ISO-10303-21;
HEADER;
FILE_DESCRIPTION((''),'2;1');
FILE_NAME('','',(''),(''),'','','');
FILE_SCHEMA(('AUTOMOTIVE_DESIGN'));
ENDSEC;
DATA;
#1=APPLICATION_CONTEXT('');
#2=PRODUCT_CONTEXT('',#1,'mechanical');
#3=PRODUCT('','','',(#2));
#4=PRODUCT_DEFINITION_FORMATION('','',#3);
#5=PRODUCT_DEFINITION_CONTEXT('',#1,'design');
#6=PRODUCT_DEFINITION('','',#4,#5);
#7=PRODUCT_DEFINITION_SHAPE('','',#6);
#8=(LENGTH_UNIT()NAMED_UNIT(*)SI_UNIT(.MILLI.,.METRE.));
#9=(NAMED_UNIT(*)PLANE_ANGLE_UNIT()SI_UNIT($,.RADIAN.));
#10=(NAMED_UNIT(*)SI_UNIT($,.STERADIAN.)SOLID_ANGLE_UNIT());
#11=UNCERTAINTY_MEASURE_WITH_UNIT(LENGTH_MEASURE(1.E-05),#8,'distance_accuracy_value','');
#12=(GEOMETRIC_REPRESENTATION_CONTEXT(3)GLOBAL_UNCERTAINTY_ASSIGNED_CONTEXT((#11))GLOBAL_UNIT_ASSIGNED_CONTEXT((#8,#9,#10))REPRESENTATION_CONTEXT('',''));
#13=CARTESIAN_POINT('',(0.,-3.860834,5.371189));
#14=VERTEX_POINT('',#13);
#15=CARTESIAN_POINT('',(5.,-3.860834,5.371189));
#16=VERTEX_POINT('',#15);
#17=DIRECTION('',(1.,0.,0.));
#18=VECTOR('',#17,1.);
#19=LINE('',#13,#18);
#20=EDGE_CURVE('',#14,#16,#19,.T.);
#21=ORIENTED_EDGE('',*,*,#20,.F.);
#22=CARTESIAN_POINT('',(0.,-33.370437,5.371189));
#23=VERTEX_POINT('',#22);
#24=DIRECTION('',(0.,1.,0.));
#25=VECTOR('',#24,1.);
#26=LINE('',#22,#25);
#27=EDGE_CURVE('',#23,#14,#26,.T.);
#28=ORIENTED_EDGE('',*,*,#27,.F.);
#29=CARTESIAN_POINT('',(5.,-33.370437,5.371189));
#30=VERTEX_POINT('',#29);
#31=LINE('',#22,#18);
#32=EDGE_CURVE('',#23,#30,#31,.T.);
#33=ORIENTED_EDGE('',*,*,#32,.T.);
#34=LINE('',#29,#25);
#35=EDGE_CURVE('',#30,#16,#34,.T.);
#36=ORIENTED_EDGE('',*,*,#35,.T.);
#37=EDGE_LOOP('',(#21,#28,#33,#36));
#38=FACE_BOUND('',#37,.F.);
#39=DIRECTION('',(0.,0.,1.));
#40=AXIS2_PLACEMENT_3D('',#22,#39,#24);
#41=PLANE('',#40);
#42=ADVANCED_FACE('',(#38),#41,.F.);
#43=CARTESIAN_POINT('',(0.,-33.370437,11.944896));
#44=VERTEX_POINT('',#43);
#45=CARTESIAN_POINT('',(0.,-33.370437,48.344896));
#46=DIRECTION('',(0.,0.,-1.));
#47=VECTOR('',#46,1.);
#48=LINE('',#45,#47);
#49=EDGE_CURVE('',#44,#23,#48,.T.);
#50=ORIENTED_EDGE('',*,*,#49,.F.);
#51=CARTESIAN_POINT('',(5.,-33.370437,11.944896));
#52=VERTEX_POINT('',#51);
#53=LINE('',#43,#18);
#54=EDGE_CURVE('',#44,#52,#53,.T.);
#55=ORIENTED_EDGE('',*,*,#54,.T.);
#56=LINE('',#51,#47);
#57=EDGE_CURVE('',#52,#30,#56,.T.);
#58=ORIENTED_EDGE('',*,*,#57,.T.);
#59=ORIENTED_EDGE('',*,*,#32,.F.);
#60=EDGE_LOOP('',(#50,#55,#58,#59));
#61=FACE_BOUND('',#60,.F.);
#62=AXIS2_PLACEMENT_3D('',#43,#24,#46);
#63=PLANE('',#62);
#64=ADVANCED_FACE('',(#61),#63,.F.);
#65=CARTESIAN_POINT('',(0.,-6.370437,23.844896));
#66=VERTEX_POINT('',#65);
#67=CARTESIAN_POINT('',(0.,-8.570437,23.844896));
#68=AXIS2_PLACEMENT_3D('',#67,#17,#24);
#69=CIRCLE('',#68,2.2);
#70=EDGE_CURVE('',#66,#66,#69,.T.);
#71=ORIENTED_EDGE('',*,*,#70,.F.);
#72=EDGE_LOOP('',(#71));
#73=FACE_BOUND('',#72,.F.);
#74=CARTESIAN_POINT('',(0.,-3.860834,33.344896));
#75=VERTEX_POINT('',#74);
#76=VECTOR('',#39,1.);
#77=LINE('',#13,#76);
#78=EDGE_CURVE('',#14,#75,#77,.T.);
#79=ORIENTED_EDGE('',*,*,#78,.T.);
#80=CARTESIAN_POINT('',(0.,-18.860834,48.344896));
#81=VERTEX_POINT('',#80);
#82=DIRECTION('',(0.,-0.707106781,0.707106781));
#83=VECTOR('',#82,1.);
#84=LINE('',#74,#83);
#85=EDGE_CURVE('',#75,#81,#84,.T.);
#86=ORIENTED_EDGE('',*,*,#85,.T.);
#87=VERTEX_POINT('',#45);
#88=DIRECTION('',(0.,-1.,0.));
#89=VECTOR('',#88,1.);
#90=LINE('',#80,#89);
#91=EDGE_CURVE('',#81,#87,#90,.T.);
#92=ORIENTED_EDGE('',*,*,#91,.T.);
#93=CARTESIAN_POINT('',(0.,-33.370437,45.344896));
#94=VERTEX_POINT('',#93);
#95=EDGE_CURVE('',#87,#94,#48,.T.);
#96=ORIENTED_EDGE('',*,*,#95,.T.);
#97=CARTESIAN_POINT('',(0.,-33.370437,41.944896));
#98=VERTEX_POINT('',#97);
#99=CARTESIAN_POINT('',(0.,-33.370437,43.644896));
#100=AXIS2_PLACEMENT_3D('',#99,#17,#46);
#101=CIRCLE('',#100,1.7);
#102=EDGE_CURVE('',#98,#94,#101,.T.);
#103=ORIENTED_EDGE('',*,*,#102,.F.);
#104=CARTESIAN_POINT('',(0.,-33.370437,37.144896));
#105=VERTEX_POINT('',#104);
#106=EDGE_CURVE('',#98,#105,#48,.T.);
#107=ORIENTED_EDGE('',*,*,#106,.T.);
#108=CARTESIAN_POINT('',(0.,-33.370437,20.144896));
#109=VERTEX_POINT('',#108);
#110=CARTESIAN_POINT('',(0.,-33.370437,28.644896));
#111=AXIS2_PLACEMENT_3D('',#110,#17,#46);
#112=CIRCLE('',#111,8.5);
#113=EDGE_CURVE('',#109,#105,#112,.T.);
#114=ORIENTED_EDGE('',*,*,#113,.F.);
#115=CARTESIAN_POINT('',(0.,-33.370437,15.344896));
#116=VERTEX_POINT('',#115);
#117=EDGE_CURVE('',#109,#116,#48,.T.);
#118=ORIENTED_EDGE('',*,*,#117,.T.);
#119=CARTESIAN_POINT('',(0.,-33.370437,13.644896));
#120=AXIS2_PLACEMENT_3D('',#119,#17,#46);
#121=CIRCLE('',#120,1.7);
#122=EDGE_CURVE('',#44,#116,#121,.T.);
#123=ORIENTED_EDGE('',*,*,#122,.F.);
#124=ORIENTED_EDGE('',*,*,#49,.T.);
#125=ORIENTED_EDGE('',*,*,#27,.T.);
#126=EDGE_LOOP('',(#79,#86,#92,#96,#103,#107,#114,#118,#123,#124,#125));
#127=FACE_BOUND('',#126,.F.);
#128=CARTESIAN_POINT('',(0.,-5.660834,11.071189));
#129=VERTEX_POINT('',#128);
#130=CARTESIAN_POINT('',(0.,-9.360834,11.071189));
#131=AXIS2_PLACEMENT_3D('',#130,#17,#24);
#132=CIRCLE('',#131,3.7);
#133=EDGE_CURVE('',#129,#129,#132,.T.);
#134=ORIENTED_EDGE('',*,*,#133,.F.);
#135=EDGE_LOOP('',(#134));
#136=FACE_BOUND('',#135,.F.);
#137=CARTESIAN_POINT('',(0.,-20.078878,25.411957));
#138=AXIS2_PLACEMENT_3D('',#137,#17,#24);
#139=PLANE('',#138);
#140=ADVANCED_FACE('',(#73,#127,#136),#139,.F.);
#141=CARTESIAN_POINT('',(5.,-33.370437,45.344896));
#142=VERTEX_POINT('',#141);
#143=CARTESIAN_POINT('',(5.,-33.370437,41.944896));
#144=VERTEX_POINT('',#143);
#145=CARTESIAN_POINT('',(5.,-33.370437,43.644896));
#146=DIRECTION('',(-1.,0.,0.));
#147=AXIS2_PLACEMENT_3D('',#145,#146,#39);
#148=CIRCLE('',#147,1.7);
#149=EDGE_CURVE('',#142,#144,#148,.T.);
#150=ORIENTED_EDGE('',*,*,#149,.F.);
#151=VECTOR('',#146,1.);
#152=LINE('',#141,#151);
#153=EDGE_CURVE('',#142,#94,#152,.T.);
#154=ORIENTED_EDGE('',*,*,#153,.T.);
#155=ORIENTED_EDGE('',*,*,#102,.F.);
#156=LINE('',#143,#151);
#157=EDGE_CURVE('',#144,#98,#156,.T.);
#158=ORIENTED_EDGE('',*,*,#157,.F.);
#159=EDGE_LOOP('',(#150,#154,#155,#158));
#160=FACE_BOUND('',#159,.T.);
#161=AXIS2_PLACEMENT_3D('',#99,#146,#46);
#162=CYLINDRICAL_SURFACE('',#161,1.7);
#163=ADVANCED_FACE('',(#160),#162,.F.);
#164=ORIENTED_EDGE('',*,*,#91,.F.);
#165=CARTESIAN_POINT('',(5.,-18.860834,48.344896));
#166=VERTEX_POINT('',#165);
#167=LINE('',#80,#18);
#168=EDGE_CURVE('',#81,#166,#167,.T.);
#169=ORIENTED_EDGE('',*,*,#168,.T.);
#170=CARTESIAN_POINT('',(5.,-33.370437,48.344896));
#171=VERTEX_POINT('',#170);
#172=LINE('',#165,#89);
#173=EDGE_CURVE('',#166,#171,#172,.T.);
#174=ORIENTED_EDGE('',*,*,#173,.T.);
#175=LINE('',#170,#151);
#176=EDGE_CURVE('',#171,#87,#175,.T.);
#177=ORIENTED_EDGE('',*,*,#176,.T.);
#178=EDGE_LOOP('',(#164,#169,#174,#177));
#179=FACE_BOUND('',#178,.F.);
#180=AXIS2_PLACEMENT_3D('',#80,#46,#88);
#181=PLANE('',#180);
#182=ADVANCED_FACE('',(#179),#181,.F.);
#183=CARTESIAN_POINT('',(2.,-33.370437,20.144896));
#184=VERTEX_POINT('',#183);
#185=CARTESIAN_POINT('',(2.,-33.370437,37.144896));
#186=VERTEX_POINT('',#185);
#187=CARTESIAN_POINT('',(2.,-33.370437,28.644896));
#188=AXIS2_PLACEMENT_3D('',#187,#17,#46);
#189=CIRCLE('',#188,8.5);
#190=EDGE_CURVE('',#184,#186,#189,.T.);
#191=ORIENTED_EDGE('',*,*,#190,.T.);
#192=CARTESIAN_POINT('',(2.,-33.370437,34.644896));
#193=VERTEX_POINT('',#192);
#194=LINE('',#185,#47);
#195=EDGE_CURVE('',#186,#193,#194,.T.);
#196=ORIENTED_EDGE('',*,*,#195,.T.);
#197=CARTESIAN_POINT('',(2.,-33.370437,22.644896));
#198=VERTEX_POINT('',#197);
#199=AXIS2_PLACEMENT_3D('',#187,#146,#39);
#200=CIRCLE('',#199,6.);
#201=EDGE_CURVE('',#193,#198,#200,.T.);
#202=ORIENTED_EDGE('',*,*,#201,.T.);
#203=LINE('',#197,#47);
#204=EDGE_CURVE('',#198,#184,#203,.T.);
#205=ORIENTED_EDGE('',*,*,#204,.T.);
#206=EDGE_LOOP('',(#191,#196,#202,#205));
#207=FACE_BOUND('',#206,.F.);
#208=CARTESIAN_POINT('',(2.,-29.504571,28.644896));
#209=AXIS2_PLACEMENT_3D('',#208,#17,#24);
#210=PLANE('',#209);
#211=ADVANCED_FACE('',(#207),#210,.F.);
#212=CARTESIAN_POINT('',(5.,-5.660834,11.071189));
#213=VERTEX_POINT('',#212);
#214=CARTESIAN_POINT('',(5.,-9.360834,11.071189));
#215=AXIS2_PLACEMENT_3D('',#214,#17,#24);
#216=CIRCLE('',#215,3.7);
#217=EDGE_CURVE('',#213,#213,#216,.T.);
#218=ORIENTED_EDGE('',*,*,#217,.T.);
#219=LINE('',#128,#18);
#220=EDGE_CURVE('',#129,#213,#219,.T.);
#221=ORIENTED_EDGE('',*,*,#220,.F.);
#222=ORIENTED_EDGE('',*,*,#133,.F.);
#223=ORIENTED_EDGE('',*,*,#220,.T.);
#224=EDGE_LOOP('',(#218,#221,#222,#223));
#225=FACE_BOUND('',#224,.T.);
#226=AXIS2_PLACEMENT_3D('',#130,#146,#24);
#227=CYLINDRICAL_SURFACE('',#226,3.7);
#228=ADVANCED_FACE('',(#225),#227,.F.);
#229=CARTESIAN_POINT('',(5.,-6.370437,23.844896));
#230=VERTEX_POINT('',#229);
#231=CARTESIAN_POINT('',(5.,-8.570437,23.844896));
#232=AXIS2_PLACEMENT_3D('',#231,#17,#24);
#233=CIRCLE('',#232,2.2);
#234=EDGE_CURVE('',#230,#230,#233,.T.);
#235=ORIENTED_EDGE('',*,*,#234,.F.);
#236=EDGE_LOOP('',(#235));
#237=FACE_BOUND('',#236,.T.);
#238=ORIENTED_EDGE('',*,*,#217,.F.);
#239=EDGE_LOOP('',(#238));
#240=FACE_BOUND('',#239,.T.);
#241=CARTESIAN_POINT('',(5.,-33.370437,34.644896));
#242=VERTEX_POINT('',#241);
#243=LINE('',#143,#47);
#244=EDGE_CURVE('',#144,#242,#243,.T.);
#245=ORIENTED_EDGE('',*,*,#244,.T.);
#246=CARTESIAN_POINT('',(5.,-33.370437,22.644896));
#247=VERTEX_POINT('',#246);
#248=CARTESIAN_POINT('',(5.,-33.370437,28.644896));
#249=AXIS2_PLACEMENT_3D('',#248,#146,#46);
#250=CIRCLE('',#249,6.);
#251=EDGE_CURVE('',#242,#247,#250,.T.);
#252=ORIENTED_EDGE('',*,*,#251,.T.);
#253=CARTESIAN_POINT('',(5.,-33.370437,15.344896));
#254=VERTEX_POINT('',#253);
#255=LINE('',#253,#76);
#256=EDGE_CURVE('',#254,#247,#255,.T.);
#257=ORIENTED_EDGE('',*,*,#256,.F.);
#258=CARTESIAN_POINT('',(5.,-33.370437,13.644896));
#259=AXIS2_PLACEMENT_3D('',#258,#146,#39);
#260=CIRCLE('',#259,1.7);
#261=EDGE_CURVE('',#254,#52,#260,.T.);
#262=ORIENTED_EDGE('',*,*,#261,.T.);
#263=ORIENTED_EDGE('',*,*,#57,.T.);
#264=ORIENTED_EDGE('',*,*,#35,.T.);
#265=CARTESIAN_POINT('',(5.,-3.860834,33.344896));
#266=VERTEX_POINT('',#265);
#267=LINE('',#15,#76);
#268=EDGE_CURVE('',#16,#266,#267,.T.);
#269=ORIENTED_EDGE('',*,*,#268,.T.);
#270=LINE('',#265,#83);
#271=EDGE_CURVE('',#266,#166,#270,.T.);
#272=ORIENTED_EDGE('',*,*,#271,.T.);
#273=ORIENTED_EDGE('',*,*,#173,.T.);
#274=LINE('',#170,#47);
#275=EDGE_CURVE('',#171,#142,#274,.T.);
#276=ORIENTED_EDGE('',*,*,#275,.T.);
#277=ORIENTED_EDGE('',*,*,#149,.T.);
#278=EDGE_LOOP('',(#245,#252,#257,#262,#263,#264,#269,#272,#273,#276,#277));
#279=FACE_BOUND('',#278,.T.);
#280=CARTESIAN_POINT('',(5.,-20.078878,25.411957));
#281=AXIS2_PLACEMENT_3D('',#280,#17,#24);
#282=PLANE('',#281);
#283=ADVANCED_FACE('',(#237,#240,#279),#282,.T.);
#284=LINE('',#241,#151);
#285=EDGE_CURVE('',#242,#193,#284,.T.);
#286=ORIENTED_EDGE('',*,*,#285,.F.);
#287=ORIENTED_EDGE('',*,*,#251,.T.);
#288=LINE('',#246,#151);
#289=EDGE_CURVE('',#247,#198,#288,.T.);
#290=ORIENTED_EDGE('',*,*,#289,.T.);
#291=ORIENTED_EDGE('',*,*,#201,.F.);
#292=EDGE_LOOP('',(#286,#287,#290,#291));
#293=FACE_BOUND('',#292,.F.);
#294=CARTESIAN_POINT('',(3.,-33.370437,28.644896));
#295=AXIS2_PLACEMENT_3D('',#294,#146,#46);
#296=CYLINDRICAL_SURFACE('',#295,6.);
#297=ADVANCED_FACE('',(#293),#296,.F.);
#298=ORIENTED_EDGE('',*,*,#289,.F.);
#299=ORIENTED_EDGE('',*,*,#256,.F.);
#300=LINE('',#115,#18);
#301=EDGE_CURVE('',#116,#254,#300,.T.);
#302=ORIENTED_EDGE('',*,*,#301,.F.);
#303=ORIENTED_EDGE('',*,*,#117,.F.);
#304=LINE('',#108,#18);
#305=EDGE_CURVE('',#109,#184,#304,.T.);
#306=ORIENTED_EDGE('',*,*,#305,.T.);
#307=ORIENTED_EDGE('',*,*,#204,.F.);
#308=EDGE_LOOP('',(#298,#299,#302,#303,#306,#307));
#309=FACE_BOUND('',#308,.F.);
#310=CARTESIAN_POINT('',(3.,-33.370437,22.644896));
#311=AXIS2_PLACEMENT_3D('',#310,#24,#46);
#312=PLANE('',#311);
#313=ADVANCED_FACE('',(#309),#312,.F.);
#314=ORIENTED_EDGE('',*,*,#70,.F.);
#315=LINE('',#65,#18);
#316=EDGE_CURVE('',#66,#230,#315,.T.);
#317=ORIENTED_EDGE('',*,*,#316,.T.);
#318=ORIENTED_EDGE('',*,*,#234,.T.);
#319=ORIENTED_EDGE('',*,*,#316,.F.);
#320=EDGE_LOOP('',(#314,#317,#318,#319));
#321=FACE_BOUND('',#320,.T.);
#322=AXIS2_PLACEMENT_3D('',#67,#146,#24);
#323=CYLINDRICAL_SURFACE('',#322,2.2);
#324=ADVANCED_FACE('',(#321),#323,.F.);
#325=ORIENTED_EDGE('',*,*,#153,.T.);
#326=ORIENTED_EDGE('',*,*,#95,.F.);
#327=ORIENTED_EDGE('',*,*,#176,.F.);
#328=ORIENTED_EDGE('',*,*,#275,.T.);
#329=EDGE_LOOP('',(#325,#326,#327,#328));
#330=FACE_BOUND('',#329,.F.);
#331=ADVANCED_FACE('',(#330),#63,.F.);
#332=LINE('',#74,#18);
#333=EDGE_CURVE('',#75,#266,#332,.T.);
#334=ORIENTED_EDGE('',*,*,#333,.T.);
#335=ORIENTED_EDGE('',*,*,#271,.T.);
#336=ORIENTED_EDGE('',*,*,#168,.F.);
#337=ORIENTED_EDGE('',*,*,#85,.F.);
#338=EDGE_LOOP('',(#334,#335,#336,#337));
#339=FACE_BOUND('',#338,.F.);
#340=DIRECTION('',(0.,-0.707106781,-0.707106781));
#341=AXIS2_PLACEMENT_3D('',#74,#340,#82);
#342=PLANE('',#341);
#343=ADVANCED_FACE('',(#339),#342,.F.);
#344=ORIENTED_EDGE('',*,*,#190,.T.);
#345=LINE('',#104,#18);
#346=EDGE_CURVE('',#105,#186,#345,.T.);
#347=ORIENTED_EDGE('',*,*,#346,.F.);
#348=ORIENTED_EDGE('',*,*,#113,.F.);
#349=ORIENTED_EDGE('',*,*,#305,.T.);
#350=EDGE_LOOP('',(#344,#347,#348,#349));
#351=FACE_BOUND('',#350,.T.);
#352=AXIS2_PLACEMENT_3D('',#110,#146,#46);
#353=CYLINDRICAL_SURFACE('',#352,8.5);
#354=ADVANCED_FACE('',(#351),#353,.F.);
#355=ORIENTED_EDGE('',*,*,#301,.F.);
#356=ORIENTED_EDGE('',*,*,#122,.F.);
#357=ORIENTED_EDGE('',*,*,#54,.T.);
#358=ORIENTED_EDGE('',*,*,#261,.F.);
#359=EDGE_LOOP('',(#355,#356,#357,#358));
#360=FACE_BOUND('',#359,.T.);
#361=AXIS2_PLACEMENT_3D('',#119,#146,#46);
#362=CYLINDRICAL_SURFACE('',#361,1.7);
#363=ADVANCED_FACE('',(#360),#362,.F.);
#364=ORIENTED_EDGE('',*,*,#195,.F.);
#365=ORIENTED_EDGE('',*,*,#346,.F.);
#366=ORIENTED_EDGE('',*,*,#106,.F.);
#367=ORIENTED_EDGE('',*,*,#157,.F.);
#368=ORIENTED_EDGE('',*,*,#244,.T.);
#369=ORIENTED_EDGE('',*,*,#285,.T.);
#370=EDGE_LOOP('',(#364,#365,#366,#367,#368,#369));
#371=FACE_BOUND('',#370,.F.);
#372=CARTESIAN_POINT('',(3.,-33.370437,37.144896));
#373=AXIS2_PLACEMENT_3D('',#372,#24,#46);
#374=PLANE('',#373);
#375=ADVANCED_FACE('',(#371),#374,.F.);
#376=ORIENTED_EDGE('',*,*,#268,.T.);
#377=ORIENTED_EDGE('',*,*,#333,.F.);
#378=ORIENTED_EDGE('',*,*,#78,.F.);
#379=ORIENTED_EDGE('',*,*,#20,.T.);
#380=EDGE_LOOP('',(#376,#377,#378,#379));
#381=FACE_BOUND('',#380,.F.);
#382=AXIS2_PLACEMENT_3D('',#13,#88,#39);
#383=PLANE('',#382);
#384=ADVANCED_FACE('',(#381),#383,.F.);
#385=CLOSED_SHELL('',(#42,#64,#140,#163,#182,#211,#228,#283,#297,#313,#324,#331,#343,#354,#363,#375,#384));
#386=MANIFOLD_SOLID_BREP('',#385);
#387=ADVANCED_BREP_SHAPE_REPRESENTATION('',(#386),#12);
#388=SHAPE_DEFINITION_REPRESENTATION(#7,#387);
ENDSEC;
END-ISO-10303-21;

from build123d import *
from build123d import SkipClean  # not in build123d's __all__

# Parameters (mm, degrees)
F0_R     = 3.7
F0_R_2   = 2.2
F1_DEPTH = 5
F2_DEPTH = 3
F3_DEPTH = 5.001
F4_DEPTH = 2
F5_DEPTH = 2


# Not quite as in the source:
# - after a boolean that leaves OpenCascade's solid faulty, fix() repairs it
# - a feature names something its author has since deleted; it is built from what else it names


with BuildPart() as f1:
    # F0 (on Right) → F1 (new body)
    with BuildSketch(Plane.YZ):
        with BuildLine():
            Line((-33.3704365752, 11.9448962937), (-33.3704365752, 5.3711892086))
            Line((-33.3704365752, 5.3711892086), (-3.8608338702, 5.3711892086))
            Line((-3.8608338702, 5.3711892086), (-3.8608338702, 33.3448962937))
            Line((-3.8608338702, 33.3448962937), (-18.8608338702, 48.3448962937))
            Line((-18.8608338702, 48.3448962937), (-33.3704365752, 48.3448962937))
            Line((-33.3704365752, 48.3448962937), (-33.3704365752, 45.3448962937))
            ThreePointArc((-33.3704365752, 45.3448962937), (-31.6704365752, 43.6448962937), (-33.3704365752, 41.9448962937))
            Line((-33.3704365752, 41.9448962937), (-33.3704365752, 37.1448962937))
            ThreePointArc((-33.3704365752, 37.1448962937), (-24.8704365752, 28.6448962937), (-33.3704365752, 20.1448962937))
            Line((-33.3704365752, 20.1448962937), (-33.3704365752, 15.3448962937))
            ThreePointArc((-33.3704365752, 15.3448962937), (-31.6704365752, 13.6448962937), (-33.3704365752, 11.9448962937))
        make_face()
        with Locations((-9.3608338702, 11.0711892086)):
            Circle(F0_R, mode=Mode.SUBTRACT)
        with Locations((-8.5704365752, 23.8448962937)):
            Circle(F0_R_2, mode=Mode.SUBTRACT)
    extrude(amount=F1_DEPTH)

    # F0 (on Right) → F2 (join)
    with BuildSketch(Plane.YZ):
        with BuildLine():
            Line((-33.3704365752, 11.9448962937), (-33.3704365752, 5.3711892086))
            Line((-33.3704365752, 5.3711892086), (-3.8608338702, 5.3711892086))
            Line((-3.8608338702, 5.3711892086), (-3.8608338702, 33.3448962937))
            Line((-3.8608338702, 33.3448962937), (-18.8608338702, 48.3448962937))
            Line((-18.8608338702, 48.3448962937), (-33.3704365752, 48.3448962937))
            Line((-33.3704365752, 48.3448962937), (-33.3704365752, 45.3448962937))
            ThreePointArc((-33.3704365752, 45.3448962937), (-31.6704365752, 43.6448962937), (-33.3704365752, 41.9448962937))
            Line((-33.3704365752, 41.9448962937), (-33.3704365752, 37.1448962937))
            ThreePointArc((-33.3704365752, 37.1448962937), (-24.8704365752, 28.6448962937), (-33.3704365752, 20.1448962937))
            Line((-33.3704365752, 20.1448962937), (-33.3704365752, 15.3448962937))
            ThreePointArc((-33.3704365752, 15.3448962937), (-31.6704365752, 13.6448962937), (-33.3704365752, 11.9448962937))
        make_face()
        with Locations((-9.3608338702, 11.0711892086)):
            Circle(F0_R, mode=Mode.SUBTRACT)
        with Locations((-8.5704365752, 23.8448962937)):
            Circle(F0_R_2, mode=Mode.SUBTRACT)
        with BuildLine():
            Line((-33.3704365752, 15.3448962937), (-33.3704365752, 11.9448962937))
            ThreePointArc((-33.3704365752, 11.9448962937), (-31.6704365752, 13.6448962937), (-33.3704365752, 15.3448962937))
        make_face()
        with BuildLine():
            Line((-33.3704365752, 22.6448962937), (-33.3704365752, 20.1448962937))
            ThreePointArc((-33.3704365752, 20.1448962937), (-24.8704365752, 28.6448962937), (-33.3704365752, 37.1448962937))
            Line((-33.3704365752, 37.1448962937), (-33.3704365752, 34.6448962937))
            ThreePointArc((-33.3704365752, 34.6448962937), (-27.3704365752, 28.6448962937), (-33.3704365752, 22.6448962937))
        make_face()
        with BuildLine():
            Line((-33.3704365752, 34.6448962937), (-33.3704365752, 22.6448962937))
            ThreePointArc((-33.3704365752, 22.6448962937), (-27.3704365752, 28.6448962937), (-33.3704365752, 34.6448962937))
        make_face()
        with BuildLine():
            ThreePointArc((-33.3704365752, 41.9448962937), (-31.6704365752, 43.6448962937), (-33.3704365752, 45.3448962937))
            Line((-33.3704365752, 45.3448962937), (-33.3704365752, 41.9448962937))
        make_face()
    extrude(amount=F2_DEPTH)

    # F0 (on Right) → F3 (cut, through all)
    with BuildSketch(Plane.YZ):
        with BuildLine():
            Line((-33.3704365752, 34.6448962937), (-33.3704365752, 22.6448962937))
            ThreePointArc((-33.3704365752, 22.6448962937), (-27.3704365752, 28.6448962937), (-33.3704365752, 34.6448962937))
        make_face()
        with BuildLine():
            ThreePointArc((-33.3704365752, 41.9448962937), (-31.6704365752, 43.6448962937), (-33.3704365752, 45.3448962937))
            Line((-33.3704365752, 45.3448962937), (-33.3704365752, 41.9448962937))
        make_face()
        with BuildLine():
            Line((-33.3704365752, 15.3448962937), (-33.3704365752, 11.9448962937))
            ThreePointArc((-33.3704365752, 11.9448962937), (-31.6704365752, 13.6448962937), (-33.3704365752, 15.3448962937))
        make_face()
    with SkipClean():  # cleaning this boolean's faces spoils the solid; the shape is the same uncleaned
        extrude(amount=F3_DEPTH, mode=Mode.SUBTRACT)

    # F4 (add, through all): a face of the model
    f4_faces = [f1.faces().sort_by_distance(p)[0] for p in [
        (3, -25.0605023533, 28.6448962937),
    ]]
    extrude(f4_faces, amount=F4_DEPTH)

    add(f1.part.fix(), mode=Mode.REPLACE)

    # F0 (on Right) → F5 (cut)
    with BuildSketch(Plane.YZ):
        with BuildLine():
            Line((-33.3704365752, 22.6448962937), (-33.3704365752, 20.1448962937))
            ThreePointArc((-33.3704365752, 20.1448962937), (-24.8704365752, 28.6448962937), (-33.3704365752, 37.1448962937))
            Line((-33.3704365752, 37.1448962937), (-33.3704365752, 34.6448962937))
            ThreePointArc((-33.3704365752, 34.6448962937), (-27.3704365752, 28.6448962937), (-33.3704365752, 22.6448962937))
        make_face()
    extrude(amount=F5_DEPTH, mode=Mode.SUBTRACT)


solid = f1.part
